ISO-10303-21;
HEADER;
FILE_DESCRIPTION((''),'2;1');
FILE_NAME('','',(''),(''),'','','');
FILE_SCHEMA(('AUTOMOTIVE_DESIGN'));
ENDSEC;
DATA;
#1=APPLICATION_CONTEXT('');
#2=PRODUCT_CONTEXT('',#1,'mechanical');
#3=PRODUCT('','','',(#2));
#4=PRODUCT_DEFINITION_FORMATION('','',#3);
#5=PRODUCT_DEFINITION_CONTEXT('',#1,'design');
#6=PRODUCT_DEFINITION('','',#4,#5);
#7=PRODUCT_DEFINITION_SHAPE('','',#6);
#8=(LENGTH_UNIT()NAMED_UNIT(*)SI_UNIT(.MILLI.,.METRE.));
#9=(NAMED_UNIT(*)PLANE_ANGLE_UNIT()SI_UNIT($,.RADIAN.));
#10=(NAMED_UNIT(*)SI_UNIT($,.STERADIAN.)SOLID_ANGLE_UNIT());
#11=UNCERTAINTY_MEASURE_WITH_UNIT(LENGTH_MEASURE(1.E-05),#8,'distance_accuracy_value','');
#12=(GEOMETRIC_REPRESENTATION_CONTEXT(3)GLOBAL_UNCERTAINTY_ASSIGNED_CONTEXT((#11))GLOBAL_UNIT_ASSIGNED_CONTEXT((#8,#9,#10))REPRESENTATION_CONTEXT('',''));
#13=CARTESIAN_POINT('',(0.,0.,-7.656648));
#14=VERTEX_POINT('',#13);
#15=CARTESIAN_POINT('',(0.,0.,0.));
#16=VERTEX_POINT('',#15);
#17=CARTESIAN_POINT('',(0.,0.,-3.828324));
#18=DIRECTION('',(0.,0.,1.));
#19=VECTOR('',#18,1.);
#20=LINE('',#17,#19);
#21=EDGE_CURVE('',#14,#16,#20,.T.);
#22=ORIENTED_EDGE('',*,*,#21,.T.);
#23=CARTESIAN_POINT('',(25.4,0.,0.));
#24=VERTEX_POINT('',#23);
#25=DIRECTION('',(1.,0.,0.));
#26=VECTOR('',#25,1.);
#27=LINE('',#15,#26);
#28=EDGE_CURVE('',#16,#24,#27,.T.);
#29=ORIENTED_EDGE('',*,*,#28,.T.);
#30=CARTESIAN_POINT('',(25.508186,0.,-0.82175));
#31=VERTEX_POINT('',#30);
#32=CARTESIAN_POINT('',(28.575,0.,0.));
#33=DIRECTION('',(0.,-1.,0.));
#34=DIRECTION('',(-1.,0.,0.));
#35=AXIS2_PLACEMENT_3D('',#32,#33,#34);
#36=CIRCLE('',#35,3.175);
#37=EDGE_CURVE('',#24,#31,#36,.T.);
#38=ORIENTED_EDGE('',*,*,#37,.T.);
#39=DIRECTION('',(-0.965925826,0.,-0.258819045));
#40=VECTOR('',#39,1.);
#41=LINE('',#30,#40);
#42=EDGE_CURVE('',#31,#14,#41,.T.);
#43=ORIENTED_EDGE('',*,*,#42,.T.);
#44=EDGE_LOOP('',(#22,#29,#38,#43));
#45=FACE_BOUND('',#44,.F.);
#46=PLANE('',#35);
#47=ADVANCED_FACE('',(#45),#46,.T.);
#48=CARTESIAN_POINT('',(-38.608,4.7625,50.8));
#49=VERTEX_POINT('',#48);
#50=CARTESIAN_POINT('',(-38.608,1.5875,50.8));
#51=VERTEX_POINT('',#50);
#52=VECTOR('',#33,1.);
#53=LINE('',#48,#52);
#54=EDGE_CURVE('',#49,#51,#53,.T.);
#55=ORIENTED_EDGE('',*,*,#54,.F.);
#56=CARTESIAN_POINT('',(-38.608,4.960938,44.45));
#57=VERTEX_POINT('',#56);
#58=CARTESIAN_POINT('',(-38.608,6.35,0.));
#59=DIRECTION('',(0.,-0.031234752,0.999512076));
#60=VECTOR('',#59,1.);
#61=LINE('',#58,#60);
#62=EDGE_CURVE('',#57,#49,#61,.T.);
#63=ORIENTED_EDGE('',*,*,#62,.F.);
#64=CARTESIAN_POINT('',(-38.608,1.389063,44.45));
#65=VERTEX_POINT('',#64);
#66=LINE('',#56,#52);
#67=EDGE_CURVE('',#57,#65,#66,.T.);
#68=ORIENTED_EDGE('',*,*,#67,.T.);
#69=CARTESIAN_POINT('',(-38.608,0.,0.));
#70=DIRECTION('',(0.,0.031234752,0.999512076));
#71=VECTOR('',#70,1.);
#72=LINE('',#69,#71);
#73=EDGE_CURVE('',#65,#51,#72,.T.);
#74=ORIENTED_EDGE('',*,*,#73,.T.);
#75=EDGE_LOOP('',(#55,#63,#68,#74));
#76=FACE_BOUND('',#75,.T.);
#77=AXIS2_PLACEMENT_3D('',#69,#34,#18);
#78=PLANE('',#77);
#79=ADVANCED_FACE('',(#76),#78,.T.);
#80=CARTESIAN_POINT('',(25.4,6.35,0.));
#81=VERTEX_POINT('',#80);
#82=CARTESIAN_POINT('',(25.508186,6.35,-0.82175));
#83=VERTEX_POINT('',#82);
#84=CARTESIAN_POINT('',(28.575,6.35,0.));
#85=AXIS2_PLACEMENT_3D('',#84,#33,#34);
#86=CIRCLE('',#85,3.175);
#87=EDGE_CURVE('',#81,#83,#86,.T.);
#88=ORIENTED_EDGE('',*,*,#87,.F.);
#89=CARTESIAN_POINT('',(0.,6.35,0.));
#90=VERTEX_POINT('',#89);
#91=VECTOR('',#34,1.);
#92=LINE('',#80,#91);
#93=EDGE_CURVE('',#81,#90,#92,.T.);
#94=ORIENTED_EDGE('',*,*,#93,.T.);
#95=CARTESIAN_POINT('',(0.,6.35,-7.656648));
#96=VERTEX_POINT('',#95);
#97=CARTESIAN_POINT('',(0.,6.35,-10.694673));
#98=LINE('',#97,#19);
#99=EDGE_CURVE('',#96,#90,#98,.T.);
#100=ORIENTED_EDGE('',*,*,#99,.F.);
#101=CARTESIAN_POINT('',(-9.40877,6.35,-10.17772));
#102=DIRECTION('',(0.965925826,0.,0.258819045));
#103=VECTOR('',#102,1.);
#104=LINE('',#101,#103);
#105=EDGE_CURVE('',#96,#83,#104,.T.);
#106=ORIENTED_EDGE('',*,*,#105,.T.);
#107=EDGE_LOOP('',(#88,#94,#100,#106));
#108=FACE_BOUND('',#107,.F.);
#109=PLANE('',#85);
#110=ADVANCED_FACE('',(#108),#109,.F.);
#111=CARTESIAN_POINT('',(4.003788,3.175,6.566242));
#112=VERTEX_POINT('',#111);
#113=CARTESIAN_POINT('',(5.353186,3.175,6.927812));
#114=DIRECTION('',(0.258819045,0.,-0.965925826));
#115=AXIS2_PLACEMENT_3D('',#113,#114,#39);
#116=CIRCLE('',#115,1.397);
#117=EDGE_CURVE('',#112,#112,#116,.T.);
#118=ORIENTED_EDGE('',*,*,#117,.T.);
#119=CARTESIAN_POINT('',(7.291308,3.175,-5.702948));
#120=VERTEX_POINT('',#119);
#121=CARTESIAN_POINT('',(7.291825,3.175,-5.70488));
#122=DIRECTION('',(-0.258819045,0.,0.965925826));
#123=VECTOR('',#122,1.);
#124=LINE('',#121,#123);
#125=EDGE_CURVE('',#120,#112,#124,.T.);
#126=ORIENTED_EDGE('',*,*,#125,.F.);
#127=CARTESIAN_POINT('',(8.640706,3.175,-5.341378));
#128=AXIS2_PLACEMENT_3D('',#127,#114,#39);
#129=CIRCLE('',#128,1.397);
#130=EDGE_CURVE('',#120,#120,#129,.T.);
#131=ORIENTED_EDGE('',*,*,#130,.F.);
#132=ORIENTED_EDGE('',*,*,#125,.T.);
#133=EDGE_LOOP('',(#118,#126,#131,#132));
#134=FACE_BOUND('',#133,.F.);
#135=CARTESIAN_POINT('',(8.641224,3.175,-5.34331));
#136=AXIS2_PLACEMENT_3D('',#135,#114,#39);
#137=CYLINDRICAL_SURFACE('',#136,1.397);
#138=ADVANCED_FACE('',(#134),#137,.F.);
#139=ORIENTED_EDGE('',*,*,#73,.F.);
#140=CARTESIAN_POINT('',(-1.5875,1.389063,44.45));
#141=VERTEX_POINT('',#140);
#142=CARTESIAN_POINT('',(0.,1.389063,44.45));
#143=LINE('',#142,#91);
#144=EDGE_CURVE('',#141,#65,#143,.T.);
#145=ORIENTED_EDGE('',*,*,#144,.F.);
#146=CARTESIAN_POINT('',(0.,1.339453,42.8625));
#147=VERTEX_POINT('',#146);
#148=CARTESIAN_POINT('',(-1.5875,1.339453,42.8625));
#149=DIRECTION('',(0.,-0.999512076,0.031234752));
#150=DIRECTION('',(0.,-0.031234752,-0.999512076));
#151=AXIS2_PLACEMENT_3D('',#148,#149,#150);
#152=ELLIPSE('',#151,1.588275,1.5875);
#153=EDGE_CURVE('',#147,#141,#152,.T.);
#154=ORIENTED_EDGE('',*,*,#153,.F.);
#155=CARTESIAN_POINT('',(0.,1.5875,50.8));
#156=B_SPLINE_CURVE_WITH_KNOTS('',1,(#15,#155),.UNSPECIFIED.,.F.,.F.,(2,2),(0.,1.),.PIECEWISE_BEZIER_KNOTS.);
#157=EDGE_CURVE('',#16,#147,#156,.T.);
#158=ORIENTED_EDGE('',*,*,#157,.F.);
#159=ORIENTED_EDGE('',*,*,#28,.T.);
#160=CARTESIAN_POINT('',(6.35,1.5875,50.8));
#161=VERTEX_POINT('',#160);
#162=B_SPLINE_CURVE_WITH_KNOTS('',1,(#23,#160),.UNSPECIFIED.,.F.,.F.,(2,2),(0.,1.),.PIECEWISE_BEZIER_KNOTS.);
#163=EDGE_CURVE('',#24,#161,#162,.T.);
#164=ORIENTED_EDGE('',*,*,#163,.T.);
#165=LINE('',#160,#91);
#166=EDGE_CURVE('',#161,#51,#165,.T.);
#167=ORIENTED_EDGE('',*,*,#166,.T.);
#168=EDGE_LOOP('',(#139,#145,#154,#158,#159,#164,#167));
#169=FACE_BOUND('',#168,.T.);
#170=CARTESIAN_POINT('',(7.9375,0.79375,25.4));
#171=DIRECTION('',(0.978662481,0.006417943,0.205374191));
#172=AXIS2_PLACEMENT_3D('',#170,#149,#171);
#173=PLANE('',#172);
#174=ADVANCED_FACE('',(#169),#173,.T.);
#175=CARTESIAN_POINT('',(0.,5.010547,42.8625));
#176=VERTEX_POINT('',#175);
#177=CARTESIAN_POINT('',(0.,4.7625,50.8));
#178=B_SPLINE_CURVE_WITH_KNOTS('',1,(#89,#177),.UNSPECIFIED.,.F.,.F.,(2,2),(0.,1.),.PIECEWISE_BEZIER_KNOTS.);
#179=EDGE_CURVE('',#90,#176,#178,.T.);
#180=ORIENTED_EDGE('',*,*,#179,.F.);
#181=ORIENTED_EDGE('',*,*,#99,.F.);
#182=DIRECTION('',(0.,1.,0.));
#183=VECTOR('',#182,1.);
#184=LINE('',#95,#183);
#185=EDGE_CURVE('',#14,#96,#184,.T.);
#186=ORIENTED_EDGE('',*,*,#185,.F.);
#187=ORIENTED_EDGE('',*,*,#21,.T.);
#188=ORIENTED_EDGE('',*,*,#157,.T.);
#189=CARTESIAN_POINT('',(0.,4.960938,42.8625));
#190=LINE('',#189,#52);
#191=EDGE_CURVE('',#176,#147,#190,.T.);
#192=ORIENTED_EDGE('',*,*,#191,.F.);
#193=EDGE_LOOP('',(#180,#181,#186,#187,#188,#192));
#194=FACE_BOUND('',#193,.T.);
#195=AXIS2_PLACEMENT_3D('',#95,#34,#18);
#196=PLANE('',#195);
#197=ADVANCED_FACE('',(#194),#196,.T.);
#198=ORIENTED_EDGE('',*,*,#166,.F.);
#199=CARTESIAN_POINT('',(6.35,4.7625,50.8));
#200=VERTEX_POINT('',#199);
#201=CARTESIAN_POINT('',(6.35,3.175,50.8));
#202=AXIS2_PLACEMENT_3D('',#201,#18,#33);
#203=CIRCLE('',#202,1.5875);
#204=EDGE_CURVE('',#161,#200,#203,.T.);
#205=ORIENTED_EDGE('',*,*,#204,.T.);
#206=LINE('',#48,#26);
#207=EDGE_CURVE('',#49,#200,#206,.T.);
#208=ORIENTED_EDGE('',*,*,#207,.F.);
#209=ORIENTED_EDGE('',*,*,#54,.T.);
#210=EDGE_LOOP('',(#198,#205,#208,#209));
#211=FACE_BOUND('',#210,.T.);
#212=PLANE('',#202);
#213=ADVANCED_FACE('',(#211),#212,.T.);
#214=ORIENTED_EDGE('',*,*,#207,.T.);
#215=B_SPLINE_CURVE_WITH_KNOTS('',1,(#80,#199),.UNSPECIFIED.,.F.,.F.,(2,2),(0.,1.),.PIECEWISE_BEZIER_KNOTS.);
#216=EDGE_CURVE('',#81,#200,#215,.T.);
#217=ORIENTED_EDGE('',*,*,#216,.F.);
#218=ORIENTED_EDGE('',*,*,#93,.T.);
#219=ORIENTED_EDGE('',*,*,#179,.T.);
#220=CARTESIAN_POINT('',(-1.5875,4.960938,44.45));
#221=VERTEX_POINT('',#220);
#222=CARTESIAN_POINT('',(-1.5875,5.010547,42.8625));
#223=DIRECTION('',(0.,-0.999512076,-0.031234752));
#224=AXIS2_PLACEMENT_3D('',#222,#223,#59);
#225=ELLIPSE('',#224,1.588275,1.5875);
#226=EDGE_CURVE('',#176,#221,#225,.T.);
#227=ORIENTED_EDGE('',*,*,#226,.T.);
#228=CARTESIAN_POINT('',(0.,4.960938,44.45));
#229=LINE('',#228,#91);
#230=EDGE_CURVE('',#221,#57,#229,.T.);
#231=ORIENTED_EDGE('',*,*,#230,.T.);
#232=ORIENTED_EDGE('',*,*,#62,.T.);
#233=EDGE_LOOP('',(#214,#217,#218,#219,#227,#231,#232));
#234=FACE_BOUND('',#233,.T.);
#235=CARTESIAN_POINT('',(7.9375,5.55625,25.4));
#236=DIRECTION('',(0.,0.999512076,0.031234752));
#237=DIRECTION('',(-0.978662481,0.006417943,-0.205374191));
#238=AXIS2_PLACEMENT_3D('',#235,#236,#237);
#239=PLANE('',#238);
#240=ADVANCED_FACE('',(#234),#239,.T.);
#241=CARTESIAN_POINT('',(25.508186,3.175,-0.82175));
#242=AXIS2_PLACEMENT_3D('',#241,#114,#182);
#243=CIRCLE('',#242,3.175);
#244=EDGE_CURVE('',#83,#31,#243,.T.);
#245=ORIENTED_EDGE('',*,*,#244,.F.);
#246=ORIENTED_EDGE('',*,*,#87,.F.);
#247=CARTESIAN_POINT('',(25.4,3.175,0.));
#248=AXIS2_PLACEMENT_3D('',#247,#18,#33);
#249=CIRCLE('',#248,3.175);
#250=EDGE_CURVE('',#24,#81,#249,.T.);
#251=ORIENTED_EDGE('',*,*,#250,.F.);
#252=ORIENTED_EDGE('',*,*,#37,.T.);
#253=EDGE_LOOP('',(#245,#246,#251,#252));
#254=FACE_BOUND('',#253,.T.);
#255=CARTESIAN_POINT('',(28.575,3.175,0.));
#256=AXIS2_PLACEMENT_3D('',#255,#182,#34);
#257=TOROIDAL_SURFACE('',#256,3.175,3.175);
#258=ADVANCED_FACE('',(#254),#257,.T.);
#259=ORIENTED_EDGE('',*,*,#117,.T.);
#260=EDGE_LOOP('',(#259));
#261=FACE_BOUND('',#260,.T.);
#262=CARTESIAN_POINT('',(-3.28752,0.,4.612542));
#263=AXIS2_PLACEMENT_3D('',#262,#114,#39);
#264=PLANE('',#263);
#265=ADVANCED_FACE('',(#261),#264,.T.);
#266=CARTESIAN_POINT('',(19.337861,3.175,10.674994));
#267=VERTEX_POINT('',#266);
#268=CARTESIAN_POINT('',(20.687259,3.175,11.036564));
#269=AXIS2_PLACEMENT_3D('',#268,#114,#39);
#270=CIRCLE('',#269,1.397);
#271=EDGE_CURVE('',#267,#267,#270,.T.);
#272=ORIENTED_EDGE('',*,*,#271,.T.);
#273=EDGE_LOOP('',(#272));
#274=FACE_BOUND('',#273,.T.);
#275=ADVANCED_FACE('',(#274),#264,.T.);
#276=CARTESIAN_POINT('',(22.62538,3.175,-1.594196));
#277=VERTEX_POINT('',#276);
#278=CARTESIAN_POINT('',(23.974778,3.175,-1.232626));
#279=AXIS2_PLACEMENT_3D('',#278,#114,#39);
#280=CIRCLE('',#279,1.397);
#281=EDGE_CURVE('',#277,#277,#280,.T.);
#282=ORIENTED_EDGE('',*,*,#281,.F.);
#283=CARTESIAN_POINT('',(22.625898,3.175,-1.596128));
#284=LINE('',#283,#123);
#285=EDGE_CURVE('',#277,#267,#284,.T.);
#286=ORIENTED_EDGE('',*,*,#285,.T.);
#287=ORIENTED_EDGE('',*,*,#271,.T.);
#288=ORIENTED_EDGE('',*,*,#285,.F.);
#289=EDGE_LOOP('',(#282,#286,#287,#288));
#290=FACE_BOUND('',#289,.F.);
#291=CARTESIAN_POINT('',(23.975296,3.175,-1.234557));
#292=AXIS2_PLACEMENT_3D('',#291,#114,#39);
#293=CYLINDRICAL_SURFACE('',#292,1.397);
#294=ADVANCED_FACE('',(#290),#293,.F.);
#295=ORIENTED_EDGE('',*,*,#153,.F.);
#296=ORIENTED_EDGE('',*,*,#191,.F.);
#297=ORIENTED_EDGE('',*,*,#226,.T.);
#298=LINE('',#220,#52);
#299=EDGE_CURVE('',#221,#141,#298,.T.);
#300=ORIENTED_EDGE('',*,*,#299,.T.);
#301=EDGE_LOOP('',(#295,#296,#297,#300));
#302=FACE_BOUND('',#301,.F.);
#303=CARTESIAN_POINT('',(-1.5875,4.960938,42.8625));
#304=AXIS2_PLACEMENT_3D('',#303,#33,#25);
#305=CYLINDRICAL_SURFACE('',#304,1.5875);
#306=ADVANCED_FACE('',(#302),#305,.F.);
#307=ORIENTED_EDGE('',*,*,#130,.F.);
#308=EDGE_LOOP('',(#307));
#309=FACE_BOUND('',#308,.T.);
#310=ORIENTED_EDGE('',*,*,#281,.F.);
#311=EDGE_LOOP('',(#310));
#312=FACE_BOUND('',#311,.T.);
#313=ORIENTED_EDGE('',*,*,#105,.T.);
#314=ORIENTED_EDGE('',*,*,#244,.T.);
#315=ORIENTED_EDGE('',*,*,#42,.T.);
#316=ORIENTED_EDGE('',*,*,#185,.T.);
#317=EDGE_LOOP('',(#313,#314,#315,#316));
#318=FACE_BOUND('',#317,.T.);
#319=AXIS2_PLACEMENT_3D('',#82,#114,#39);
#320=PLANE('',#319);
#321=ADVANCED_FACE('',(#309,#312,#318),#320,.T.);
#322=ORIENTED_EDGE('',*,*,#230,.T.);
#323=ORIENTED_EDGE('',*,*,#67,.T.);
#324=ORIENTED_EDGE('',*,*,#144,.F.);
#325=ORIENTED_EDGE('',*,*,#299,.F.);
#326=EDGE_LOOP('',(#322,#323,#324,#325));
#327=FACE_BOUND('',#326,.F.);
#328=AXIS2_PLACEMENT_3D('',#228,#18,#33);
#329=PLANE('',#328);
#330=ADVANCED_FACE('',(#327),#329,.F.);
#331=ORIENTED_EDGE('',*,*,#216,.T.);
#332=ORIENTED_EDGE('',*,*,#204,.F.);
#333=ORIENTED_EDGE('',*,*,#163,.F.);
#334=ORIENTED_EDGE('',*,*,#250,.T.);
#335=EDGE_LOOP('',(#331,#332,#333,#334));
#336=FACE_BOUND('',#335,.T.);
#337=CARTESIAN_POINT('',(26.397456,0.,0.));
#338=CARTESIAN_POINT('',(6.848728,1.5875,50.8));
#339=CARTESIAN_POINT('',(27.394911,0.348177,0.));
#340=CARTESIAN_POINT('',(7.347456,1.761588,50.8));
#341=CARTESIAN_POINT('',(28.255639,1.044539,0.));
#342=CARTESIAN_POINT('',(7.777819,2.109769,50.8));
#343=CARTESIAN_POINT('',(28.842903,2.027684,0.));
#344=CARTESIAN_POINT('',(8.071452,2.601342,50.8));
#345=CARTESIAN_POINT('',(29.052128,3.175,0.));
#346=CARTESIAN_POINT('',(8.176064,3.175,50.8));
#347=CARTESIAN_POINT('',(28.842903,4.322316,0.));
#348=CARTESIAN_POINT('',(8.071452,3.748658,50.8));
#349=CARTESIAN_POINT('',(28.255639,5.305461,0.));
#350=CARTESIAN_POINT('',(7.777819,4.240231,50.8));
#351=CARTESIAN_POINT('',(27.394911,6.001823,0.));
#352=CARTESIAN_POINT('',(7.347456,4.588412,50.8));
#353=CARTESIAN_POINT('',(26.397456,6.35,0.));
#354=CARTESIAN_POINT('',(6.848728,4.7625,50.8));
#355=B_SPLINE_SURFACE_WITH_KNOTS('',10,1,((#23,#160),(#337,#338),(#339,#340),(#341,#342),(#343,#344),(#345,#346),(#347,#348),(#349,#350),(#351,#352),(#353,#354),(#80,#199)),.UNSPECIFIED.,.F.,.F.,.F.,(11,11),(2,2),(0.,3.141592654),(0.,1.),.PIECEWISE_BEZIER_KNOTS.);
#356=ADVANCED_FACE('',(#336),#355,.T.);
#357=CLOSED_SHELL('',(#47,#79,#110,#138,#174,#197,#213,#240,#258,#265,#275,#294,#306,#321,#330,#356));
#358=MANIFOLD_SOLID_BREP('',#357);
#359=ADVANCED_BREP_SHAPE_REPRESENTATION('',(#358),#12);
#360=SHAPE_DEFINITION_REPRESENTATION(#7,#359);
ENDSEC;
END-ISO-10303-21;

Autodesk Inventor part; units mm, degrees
ref_plane "YZ Plane" through (0, 0, 0) normal (1, 0, 0) x (0, 1, 0)
ref_plane "XZ Plane" through (0, 0, 0) normal (0, 1, 0) x (-1, 0, 0)
sketch "Sketch2" plane through (0, 0, 0) normal (0, 0, 1) x (1, 0, 0)
  line L0 (0, 0) -> (25.4, 0)
  line L1 (25.4, 0) -> (25.4, 6.35)
  line L2 (25.4, 6.35) -> (0, 6.35)
  line L3 (0, 6.35) -> (0, 0)
  arc A0 (25.4, 0) -> (25.4, 6.35) centre (25.4, 3.175) ccw
  dimension "d0" = 25.4
  dimension "d1" = 6.35
ref_plane "Work Plane1" through (0, 0, 50.8) normal (0, 0, 1) x (1, 0, 0)
sketch "Sketch3" plane through (0, 0, 50.8) normal (0, 0, 1) x (1, 0, 0)
  line L0 (0, 1.5875) -> (6.35, 1.5875)
  line L1 (6.35, 1.5875) -> (6.35, 4.7625)
  line L2 (6.35, 4.7625) -> (0, 4.7625)
  line L3 (0, 4.7625) -> (0, 1.5875)
  arc A0 (6.35, 1.5875) -> (6.35, 4.7625) centre (6.35, 3.175) ccw
  point P0 (0, 0)
  dimension "d3" = 6.35
  dimension "d4" = 3.175
  dimension "d5" = 1.5875
loft "Loft1" add profiles "Sketch2", "Sketch3"
sketch "Sketch4" plane through (0, 0, 0) normal (-1, 0, 0) x (0, 0, 1)
  line L0 (0, 6.35) -> (0, 0)
  line L1 (0, 0) -> (50.8, 1.5875)
  line L2 (50.8, 4.7625) -> (50.8, 1.5875)
  line L3 (0, 6.35) -> (50.8, 4.7625)
  line L4 (0, 6.35) -> (50.8, 4.7625)
  line L5 (44.45, 4.960938) -> (44.45, 1.389063)
  line L6 (50.8, 1.5875) -> (0, 0)
  dimension "d10" = 6.35
extrude "Extrusion1" add sketch "Sketch4" along normal blind 38.608 contours L3 L2 L1 L5
sketch "Sketch5" plane through (25.4, 6.35, 0) normal (0, 0, -1) x (-1, 0, 0)
  line L0 (25.4, 0) -> (25.4, -6.35)
  line L1 (0, 0) -> (25.4, 0)
  arc A0 (0, 0) -> (0, -6.35) centre (0, -3.175) ccw
  line L2 (25.4, -6.35) -> (0, -6.35)
  line L3 (25.4, 0) -> (25.4, -6.35)
  line L4 (25.4, 0) -> (36.148692, 0)
  line L5 (36.148692, 0) -> (36.148692, -6.35)
  line L6 (36.148692, -6.35) -> (25.4, -6.35)
  line L7 (25.4, -6.35) -> (25.4, 0)
  line L8 (-3.175, -0.10761) -> (-3.175, -7.006989)
sketch "Sketch5 outline for Revolution1" plane through (25.4, 6.35, 0) normal (0, 0, -1) x (-1, 0, 0)
  line L0 (36.148692, 0) -> (0, 0)
  arc A0 (0, 0) -> (0, -6.35) centre (0, -3.175) ccw
  line L1 (0, -6.35) -> (36.148692, -6.35)
  line L2 (36.148692, -6.35) -> (36.148692, 0)
revolve "Revolution1" add sketch "Sketch5 outline for Revolution1" angle 15 about axis through (28.575, 6.24239, 0) along (0, -1, 0)
sketch "Sketch7" plane through (-10.748692, 6.35, 0) normal (0, 1, 0) x (1, 0, 0)
  line L0 (0, 0) -> (10.748692, 0)
  line L1 (36.148692, 0) -> (10.748692, 0)
  arc A0 (36.256878, 0.82175) -> (36.148692, 0) centre (39.323692, 0) ccw
  line L2 (1.339922, 10.17772) -> (36.256878, 0.82175)
  arc A1 (1.339922, 10.17772) -> (0, 0) centre (39.323692, 0) ccw
  line L3 (10.748692, 0) -> (10.748692, -44.45)
  line L4 (10.748692, 0) -> (-2.055619, 0)
  line L5 (-2.055619, 0) -> (-2.055619, 10.694673)
  line L6 (-2.055619, 10.694673) -> (10.748692, 10.694673)
  line L7 (10.748692, 10.694673) -> (10.748692, 0)
extrude "Extrusion2" cut sketch "Sketch7" against normal blind 38.1 contours A1 L2 L7 L0 | L4 L5 L6 L7 L2 A1
fillet "Fillet1" radius 1.5875 1 edges at (0, 3.175, 44.45)
sketch "Sketch8" plane through (0, 0, -7.656648) normal (0.258819, 0, -0.9659258) x (-0.9659258, 0, -0.258819)
  line L0 (-29.583017, 3.175) -> (-24.820517, 3.175)
  line L1 (-24.820517, 3.175) -> (-8.945517, 3.175)
  circle A0 centre (-24.820517, 3.175) radius 1.397
  circle A1 centre (-8.945517, 3.175) radius 1.397
  line L2 (-26.408017, 0) -> (0, 0)
  point P0 (-1.981686, 0)
  dimension "d17" = 4.7625
  dimension "d18" = 15.875
  dimension "d19" = 2.794
  dimension "d20" = 2.794
  dimension "d23" = 3.175
extrude "Extrusion4" cut sketch "Sketch8" against normal blind 12.7
properties part number "DivePlanesStabilizingFins"
